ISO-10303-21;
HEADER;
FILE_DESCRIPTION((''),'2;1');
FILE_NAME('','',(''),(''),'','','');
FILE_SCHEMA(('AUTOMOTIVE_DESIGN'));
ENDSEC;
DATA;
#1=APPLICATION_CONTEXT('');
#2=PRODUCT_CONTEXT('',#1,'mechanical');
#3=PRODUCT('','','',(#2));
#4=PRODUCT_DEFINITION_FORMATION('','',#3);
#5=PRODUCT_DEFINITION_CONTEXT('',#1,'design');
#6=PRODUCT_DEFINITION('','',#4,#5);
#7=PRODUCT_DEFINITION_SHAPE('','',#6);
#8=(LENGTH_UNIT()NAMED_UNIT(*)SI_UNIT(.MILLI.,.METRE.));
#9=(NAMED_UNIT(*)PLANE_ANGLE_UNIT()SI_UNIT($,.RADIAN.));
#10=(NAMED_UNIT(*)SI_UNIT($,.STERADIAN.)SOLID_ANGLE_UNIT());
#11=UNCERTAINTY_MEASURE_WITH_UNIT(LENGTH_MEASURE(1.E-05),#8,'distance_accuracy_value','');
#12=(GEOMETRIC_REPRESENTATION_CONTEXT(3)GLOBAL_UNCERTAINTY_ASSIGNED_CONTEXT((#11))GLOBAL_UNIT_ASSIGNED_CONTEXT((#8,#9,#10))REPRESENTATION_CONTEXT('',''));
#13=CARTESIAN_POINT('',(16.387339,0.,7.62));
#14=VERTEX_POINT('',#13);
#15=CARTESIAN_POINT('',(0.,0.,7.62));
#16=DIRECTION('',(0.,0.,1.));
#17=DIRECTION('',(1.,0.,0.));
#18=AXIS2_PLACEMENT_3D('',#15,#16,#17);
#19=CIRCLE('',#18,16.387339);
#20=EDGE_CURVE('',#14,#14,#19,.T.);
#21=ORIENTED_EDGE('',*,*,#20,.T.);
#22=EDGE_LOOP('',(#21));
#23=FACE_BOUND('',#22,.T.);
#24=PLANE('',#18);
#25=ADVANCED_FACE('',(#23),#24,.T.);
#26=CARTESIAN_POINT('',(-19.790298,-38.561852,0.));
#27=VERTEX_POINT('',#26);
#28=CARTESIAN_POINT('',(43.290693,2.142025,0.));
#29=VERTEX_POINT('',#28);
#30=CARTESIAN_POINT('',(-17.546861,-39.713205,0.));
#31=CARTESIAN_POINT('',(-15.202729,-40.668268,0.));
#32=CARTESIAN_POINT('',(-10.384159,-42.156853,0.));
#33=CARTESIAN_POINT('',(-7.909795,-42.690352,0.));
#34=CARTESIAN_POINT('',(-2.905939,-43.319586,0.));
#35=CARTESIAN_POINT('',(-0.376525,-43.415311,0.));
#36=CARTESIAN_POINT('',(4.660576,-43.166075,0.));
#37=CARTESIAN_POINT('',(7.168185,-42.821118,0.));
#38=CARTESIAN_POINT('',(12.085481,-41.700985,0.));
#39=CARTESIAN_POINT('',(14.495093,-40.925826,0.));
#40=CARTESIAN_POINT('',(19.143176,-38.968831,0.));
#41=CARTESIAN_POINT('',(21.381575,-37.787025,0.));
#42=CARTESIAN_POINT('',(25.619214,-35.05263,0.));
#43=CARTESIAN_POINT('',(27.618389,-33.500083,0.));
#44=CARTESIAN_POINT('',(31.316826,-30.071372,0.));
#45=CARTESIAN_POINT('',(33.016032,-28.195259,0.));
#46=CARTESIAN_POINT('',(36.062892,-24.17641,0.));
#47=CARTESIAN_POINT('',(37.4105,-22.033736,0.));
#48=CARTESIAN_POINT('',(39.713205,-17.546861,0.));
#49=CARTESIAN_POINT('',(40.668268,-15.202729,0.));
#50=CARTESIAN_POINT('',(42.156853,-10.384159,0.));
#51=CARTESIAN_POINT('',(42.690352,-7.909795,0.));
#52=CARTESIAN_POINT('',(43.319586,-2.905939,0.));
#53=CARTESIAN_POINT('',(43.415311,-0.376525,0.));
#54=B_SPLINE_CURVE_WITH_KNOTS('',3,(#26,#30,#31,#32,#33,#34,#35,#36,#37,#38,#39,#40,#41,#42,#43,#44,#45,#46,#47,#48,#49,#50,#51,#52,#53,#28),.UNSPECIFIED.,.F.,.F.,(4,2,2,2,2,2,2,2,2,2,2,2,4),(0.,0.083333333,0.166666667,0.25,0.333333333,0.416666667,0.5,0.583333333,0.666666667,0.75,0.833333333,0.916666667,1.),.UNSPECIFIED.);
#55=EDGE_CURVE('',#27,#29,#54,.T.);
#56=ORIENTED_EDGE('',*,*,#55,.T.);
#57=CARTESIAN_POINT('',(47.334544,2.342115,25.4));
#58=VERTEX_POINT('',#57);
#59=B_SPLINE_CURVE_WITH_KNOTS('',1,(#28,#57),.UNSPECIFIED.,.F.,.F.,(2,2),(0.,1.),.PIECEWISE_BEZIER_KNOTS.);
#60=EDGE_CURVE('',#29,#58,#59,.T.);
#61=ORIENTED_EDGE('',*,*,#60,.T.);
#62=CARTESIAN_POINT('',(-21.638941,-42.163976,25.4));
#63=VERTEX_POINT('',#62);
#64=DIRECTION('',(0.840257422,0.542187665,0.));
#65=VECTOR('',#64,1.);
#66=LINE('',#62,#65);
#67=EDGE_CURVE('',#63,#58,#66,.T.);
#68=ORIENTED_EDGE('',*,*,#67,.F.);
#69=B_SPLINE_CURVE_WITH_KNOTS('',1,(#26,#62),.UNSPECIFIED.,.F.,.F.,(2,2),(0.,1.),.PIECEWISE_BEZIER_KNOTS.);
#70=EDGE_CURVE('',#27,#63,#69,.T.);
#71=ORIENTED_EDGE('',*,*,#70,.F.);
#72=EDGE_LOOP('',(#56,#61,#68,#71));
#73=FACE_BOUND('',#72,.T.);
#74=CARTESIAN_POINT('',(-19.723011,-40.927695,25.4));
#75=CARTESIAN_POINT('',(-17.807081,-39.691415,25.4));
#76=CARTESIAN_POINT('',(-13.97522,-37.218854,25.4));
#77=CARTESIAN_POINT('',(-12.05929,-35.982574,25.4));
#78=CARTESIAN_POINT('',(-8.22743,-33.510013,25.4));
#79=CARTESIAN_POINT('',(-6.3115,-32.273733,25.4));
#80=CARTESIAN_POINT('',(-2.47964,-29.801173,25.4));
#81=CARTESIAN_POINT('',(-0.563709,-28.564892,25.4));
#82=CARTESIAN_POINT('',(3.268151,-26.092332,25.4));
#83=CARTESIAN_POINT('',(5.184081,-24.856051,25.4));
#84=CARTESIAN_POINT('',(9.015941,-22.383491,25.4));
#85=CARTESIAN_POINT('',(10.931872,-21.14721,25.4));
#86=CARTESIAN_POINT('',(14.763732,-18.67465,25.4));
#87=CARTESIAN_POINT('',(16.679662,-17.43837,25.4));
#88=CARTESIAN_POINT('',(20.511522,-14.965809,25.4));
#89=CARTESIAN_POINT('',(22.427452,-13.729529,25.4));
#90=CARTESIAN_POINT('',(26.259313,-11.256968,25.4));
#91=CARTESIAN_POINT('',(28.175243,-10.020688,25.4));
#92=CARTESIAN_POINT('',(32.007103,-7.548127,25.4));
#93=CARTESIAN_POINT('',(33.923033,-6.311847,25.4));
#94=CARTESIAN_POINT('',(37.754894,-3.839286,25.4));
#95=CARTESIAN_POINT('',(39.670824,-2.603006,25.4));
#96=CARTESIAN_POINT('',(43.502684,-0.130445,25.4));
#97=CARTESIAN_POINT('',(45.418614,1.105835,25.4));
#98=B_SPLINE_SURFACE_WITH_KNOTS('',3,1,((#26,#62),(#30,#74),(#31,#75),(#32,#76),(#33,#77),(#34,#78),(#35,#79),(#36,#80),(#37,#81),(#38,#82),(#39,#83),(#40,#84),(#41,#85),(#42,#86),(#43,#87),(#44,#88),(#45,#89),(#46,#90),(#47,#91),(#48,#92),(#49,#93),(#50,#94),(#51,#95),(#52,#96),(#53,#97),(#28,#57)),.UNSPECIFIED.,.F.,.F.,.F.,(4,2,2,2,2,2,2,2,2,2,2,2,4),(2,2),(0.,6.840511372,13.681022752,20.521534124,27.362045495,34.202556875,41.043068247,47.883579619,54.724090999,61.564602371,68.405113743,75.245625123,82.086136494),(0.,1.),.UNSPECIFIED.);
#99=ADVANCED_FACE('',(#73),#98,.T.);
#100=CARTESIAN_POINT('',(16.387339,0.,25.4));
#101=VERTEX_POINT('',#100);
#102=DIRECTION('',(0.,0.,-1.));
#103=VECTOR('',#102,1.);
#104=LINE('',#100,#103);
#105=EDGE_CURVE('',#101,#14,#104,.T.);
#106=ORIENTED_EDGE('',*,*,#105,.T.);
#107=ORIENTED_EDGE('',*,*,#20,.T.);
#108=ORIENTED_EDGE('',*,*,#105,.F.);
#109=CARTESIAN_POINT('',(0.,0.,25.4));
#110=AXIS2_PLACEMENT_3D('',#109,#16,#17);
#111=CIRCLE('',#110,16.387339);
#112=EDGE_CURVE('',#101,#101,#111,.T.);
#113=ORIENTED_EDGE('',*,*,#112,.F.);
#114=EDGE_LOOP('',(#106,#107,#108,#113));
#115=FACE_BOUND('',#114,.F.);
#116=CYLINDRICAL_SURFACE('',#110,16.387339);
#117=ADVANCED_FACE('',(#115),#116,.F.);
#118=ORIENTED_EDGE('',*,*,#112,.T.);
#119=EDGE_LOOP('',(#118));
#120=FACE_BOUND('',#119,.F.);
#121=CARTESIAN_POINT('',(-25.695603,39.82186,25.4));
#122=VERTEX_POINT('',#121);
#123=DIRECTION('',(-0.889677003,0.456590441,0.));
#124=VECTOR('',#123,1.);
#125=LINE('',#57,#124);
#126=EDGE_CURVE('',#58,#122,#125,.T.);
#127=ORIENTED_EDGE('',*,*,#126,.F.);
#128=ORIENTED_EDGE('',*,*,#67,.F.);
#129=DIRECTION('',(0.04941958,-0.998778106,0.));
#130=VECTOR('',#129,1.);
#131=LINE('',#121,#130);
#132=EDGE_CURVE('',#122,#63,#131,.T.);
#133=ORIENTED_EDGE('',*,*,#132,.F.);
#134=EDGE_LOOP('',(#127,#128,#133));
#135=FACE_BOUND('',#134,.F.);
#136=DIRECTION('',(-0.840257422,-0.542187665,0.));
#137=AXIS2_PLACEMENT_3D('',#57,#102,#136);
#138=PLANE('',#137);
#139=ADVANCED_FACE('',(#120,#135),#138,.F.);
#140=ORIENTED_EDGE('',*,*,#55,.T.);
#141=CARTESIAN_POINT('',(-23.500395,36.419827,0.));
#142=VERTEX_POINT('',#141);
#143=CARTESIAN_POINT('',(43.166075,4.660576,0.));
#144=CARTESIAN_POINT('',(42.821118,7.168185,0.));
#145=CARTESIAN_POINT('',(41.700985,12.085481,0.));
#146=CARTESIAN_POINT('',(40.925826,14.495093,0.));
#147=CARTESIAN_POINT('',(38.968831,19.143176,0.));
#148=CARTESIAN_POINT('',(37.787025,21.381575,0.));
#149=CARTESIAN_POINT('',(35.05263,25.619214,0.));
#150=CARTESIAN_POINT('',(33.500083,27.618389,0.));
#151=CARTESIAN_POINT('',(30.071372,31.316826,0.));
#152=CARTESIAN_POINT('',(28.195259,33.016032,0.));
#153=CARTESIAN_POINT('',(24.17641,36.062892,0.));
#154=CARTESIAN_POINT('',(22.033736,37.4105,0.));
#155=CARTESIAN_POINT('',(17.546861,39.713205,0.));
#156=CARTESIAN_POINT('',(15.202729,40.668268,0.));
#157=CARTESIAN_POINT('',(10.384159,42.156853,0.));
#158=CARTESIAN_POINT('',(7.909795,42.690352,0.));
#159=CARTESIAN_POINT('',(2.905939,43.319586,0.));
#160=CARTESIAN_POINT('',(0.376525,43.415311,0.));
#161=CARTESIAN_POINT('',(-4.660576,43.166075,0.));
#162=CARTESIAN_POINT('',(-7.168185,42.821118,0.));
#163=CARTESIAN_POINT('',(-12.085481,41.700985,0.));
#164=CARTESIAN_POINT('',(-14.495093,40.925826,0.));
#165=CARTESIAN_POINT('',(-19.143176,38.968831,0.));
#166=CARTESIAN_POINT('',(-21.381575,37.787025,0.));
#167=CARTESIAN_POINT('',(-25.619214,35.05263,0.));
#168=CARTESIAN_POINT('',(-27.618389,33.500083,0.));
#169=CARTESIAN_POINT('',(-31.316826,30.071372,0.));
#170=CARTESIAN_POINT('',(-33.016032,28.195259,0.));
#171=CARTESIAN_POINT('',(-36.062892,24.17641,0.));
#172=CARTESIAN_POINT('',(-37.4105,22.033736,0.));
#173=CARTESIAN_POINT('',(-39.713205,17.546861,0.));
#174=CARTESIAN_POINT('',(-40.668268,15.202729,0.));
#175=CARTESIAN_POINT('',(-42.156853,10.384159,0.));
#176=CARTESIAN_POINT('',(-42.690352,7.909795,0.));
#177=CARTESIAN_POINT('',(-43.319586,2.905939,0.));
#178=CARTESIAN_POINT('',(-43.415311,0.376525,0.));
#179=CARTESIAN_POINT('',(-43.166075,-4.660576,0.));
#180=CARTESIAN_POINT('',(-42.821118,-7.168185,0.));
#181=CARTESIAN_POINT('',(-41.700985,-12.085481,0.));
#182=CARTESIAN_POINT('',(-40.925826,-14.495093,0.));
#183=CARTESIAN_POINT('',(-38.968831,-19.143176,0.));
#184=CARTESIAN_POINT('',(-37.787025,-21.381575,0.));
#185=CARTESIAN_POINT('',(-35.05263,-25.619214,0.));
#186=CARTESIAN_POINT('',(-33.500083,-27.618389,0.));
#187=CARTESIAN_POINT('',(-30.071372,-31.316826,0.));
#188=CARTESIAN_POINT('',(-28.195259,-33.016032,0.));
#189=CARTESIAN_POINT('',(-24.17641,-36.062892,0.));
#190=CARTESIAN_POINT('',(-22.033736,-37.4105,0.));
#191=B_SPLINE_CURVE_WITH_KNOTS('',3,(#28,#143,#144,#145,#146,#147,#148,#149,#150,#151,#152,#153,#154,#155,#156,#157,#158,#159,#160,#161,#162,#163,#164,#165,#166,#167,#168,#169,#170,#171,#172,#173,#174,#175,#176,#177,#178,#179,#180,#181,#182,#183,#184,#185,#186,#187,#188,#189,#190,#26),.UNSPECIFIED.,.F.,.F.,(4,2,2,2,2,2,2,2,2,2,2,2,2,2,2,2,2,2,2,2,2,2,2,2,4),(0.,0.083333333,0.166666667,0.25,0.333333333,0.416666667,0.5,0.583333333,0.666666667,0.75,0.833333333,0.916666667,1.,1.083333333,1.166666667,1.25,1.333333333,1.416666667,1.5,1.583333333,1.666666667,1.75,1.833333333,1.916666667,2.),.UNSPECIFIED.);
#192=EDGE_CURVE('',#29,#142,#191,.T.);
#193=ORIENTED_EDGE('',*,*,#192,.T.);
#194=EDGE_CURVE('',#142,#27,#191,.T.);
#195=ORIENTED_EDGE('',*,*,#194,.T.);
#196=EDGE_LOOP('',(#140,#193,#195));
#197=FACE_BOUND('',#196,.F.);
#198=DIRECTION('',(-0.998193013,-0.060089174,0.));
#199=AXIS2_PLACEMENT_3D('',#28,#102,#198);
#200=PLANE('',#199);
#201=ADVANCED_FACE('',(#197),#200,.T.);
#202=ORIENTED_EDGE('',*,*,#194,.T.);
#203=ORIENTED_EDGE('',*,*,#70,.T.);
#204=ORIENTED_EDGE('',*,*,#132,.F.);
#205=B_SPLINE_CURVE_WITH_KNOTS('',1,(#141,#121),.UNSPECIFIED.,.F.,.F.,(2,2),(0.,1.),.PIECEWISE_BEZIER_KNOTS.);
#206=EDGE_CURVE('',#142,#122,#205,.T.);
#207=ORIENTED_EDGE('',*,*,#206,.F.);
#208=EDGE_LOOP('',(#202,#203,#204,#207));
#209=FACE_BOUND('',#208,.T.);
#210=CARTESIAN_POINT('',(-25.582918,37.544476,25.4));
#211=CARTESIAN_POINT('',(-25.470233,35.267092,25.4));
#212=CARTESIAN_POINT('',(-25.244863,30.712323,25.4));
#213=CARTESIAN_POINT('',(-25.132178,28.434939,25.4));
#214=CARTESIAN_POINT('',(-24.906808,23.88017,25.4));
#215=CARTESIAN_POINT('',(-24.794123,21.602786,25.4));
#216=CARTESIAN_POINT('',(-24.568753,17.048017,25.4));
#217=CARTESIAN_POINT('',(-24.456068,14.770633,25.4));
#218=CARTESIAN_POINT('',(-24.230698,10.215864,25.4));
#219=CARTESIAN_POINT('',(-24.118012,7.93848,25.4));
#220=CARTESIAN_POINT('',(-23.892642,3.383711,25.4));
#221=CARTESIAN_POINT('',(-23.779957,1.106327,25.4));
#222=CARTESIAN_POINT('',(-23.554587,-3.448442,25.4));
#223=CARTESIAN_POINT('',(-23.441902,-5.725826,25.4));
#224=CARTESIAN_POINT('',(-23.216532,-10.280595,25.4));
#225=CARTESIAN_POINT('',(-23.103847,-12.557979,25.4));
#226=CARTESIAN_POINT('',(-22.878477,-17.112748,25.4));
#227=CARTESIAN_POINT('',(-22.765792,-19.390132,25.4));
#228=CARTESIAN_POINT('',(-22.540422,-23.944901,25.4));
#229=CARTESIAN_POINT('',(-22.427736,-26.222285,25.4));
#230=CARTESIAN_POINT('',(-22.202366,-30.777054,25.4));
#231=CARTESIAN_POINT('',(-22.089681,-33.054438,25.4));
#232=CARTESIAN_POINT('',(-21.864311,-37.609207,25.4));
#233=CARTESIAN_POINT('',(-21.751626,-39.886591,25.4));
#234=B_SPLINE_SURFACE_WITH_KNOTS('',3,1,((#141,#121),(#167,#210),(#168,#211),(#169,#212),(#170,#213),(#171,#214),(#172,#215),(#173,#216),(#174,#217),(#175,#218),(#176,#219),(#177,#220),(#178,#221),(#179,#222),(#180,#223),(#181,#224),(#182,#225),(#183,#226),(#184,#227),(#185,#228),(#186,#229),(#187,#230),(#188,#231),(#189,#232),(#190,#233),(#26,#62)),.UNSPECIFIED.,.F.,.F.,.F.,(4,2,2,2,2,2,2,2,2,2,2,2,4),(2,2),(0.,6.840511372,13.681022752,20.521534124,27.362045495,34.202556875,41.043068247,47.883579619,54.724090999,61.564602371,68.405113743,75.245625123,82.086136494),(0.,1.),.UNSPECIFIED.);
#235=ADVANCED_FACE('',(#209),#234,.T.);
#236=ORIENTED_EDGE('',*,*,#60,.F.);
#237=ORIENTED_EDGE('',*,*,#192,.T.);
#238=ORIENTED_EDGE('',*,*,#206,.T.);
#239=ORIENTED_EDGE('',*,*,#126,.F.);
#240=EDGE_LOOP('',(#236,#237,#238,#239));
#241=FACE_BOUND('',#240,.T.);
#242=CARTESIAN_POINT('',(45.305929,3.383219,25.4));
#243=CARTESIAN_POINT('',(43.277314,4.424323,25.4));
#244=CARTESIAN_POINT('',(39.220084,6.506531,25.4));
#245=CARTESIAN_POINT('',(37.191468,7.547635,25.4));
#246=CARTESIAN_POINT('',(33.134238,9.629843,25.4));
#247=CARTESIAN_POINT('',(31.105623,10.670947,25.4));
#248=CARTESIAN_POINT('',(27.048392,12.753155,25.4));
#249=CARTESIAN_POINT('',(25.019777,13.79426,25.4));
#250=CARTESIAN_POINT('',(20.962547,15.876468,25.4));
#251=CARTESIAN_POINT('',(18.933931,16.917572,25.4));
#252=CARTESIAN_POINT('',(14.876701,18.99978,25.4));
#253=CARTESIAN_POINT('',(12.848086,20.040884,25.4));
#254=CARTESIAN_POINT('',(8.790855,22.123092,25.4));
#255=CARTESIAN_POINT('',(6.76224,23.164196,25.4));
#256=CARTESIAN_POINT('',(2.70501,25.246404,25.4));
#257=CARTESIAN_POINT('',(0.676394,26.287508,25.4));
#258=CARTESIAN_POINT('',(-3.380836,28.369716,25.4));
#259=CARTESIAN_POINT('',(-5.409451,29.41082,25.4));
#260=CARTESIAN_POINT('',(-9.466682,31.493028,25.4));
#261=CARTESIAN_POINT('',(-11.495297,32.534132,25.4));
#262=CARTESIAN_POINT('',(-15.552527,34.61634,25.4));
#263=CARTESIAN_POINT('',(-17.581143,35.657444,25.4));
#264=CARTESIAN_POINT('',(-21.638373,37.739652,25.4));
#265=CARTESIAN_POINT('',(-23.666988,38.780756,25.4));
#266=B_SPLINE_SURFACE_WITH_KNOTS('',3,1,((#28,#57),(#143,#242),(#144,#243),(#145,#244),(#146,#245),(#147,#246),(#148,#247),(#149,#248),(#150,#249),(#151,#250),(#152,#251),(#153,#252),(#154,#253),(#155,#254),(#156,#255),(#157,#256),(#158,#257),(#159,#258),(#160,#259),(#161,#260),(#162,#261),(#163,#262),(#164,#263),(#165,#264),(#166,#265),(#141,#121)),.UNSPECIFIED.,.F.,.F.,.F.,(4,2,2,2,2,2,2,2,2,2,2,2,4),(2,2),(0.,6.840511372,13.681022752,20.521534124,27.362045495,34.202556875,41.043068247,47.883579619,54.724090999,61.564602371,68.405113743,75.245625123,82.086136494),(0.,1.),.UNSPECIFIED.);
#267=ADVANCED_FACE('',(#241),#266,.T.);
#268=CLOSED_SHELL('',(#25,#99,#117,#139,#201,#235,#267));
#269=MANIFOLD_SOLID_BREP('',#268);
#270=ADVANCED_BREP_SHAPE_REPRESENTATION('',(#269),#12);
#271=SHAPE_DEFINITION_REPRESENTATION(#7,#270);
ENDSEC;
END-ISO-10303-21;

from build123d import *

# Parameters (mm, degrees)
F4_R     = 16.3873393924
F5_DEPTH = 17.78


# Not quite as in the source:
# - the arcs of a loft's sections are written as splines that run evenly, so that the points pair up as in the source's solid


with BuildPart() as f3:
    # F1 (on Top) → F3 section 0
    with BuildSketch(Plane.XY):
        with BuildLine():
            add(Edge.make_bspline(
                [(43.2906929066, 2.1420251998), (43.1660749319, 4.6605756221), (42.821117674, 7.168184659), (41.7009847964, 12.0854812551), (40.9258264748, 14.495092877), (38.9688313396, 19.1431756557), (37.7870247476, 21.3815750327), (35.0526296616, 25.6192143509), (33.5000833946, 27.6183888507), (30.071371569, 31.3168261821), (28.1952589595, 33.0160318991), (24.176410068, 36.0628920967), (22.0337358485, 37.4104995251), (17.546860581, 39.7132052837), (15.2027288233, 40.6682680536), (10.3841586143, 42.156852824), (7.9097945757, 42.6903518365), (2.9059392428, 43.3195857237), (0.3765252225, 43.4153108812), (-4.6605756221, 43.1660749319), (-7.168184659, 42.821117674), (-12.0854812551, 41.7009847964), (-14.495092877, 40.9258264748), (-19.1431756557, 38.9688313396), (-21.3815750327, 37.7870247476), (-23.5003946918, 36.4198272046)],
                knots=[0, 0, 0, 0, 0.0833333333, 0.0833333333, 0.1666666667, 0.1666666667, 0.25, 0.25, 0.3333333333, 0.3333333333, 0.4166666667, 0.4166666667, 0.5, 0.5, 0.5833333333, 0.5833333333, 0.6666666667, 0.6666666667, 0.75, 0.75, 0.8333333333, 0.8333333333, 0.9166666667, 0.9166666667, 1, 1, 1, 1], degree=3))
            add(Edge.make_bspline(
                [(-23.5003946918, 36.4198272046), (-25.6192143509, 35.0526296616), (-27.6183888507, 33.5000833946), (-31.3168261821, 30.071371569), (-33.0160318991, 28.1952589595), (-36.0628920967, 24.176410068), (-37.4104995251, 22.0337358485), (-39.7132052837, 17.546860581), (-40.6682680536, 15.2027288233), (-42.156852824, 10.3841586143), (-42.6903518365, 7.9097945757), (-43.3195857237, 2.9059392428), (-43.4153108812, 0.3765252225), (-43.1660749319, -4.6605756221), (-42.821117674, -7.168184659), (-41.7009847964, -12.0854812551), (-40.9258264748, -14.495092877), (-38.9688313396, -19.1431756557), (-37.7870247476, -21.3815750327), (-35.0526296616, -25.6192143509), (-33.5000833946, -27.6183888507), (-30.071371569, -31.3168261821), (-28.1952589595, -33.0160318991), (-24.176410068, -36.0628920967), (-22.0337358485, -37.4104995251), (-19.7902982147, -38.5618524044)],
                knots=[0, 0, 0, 0, 0.0833333333, 0.0833333333, 0.1666666667, 0.1666666667, 0.25, 0.25, 0.3333333333, 0.3333333333, 0.4166666667, 0.4166666667, 0.5, 0.5, 0.5833333333, 0.5833333333, 0.6666666667, 0.6666666667, 0.75, 0.75, 0.8333333333, 0.8333333333, 0.9166666667, 0.9166666667, 1, 1, 1, 1], degree=3))
            add(Edge.make_bspline(
                [(-19.7902982147, -38.5618524044), (-17.546860581, -39.7132052837), (-15.2027288233, -40.6682680536), (-10.3841586143, -42.156852824), (-7.9097945757, -42.6903518365), (-2.9059392428, -43.3195857237), (-0.3765252225, -43.4153108812), (4.6605756221, -43.1660749319), (7.168184659, -42.821117674), (12.0854812551, -41.7009847964), (14.495092877, -40.9258264748), (19.1431756557, -38.9688313396), (21.3815750327, -37.7870247476), (25.6192143509, -35.0526296616), (27.6183888507, -33.5000833946), (31.3168261821, -30.071371569), (33.0160318991, -28.1952589595), (36.0628920967, -24.176410068), (37.4104995251, -22.0337358485), (39.7132052837, -17.546860581), (40.6682680536, -15.2027288233), (42.156852824, -10.3841586143), (42.6903518365, -7.9097945757), (43.3195857237, -2.9059392428), (43.4153108812, -0.3765252225), (43.2906929066, 2.1420251998)],
                knots=[0, 0, 0, 0, 0.0833333333, 0.0833333333, 0.1666666667, 0.1666666667, 0.25, 0.25, 0.3333333333, 0.3333333333, 0.4166666667, 0.4166666667, 0.5, 0.5, 0.5833333333, 0.5833333333, 0.6666666667, 0.6666666667, 0.75, 0.75, 0.8333333333, 0.8333333333, 0.9166666667, 0.9166666667, 1, 1, 1, 1], degree=3))
        make_face()
    # F2 (on offset) → F3 section 1
    with BuildSketch(Plane.XY.offset(25.4)):
        Polygon((47.3345444493, 2.3421151343), (-25.6956034295, 39.8218604025), (-21.6389410198, -42.1639755368), align=None)
    loft(ruled=True)

    # F4 (on face) → F5 (cut)
    with BuildSketch(Plane.XY.offset(25.4)):
        Circle(F4_R)
    extrude(amount=-F5_DEPTH, mode=Mode.SUBTRACT)


solid = f3.part
